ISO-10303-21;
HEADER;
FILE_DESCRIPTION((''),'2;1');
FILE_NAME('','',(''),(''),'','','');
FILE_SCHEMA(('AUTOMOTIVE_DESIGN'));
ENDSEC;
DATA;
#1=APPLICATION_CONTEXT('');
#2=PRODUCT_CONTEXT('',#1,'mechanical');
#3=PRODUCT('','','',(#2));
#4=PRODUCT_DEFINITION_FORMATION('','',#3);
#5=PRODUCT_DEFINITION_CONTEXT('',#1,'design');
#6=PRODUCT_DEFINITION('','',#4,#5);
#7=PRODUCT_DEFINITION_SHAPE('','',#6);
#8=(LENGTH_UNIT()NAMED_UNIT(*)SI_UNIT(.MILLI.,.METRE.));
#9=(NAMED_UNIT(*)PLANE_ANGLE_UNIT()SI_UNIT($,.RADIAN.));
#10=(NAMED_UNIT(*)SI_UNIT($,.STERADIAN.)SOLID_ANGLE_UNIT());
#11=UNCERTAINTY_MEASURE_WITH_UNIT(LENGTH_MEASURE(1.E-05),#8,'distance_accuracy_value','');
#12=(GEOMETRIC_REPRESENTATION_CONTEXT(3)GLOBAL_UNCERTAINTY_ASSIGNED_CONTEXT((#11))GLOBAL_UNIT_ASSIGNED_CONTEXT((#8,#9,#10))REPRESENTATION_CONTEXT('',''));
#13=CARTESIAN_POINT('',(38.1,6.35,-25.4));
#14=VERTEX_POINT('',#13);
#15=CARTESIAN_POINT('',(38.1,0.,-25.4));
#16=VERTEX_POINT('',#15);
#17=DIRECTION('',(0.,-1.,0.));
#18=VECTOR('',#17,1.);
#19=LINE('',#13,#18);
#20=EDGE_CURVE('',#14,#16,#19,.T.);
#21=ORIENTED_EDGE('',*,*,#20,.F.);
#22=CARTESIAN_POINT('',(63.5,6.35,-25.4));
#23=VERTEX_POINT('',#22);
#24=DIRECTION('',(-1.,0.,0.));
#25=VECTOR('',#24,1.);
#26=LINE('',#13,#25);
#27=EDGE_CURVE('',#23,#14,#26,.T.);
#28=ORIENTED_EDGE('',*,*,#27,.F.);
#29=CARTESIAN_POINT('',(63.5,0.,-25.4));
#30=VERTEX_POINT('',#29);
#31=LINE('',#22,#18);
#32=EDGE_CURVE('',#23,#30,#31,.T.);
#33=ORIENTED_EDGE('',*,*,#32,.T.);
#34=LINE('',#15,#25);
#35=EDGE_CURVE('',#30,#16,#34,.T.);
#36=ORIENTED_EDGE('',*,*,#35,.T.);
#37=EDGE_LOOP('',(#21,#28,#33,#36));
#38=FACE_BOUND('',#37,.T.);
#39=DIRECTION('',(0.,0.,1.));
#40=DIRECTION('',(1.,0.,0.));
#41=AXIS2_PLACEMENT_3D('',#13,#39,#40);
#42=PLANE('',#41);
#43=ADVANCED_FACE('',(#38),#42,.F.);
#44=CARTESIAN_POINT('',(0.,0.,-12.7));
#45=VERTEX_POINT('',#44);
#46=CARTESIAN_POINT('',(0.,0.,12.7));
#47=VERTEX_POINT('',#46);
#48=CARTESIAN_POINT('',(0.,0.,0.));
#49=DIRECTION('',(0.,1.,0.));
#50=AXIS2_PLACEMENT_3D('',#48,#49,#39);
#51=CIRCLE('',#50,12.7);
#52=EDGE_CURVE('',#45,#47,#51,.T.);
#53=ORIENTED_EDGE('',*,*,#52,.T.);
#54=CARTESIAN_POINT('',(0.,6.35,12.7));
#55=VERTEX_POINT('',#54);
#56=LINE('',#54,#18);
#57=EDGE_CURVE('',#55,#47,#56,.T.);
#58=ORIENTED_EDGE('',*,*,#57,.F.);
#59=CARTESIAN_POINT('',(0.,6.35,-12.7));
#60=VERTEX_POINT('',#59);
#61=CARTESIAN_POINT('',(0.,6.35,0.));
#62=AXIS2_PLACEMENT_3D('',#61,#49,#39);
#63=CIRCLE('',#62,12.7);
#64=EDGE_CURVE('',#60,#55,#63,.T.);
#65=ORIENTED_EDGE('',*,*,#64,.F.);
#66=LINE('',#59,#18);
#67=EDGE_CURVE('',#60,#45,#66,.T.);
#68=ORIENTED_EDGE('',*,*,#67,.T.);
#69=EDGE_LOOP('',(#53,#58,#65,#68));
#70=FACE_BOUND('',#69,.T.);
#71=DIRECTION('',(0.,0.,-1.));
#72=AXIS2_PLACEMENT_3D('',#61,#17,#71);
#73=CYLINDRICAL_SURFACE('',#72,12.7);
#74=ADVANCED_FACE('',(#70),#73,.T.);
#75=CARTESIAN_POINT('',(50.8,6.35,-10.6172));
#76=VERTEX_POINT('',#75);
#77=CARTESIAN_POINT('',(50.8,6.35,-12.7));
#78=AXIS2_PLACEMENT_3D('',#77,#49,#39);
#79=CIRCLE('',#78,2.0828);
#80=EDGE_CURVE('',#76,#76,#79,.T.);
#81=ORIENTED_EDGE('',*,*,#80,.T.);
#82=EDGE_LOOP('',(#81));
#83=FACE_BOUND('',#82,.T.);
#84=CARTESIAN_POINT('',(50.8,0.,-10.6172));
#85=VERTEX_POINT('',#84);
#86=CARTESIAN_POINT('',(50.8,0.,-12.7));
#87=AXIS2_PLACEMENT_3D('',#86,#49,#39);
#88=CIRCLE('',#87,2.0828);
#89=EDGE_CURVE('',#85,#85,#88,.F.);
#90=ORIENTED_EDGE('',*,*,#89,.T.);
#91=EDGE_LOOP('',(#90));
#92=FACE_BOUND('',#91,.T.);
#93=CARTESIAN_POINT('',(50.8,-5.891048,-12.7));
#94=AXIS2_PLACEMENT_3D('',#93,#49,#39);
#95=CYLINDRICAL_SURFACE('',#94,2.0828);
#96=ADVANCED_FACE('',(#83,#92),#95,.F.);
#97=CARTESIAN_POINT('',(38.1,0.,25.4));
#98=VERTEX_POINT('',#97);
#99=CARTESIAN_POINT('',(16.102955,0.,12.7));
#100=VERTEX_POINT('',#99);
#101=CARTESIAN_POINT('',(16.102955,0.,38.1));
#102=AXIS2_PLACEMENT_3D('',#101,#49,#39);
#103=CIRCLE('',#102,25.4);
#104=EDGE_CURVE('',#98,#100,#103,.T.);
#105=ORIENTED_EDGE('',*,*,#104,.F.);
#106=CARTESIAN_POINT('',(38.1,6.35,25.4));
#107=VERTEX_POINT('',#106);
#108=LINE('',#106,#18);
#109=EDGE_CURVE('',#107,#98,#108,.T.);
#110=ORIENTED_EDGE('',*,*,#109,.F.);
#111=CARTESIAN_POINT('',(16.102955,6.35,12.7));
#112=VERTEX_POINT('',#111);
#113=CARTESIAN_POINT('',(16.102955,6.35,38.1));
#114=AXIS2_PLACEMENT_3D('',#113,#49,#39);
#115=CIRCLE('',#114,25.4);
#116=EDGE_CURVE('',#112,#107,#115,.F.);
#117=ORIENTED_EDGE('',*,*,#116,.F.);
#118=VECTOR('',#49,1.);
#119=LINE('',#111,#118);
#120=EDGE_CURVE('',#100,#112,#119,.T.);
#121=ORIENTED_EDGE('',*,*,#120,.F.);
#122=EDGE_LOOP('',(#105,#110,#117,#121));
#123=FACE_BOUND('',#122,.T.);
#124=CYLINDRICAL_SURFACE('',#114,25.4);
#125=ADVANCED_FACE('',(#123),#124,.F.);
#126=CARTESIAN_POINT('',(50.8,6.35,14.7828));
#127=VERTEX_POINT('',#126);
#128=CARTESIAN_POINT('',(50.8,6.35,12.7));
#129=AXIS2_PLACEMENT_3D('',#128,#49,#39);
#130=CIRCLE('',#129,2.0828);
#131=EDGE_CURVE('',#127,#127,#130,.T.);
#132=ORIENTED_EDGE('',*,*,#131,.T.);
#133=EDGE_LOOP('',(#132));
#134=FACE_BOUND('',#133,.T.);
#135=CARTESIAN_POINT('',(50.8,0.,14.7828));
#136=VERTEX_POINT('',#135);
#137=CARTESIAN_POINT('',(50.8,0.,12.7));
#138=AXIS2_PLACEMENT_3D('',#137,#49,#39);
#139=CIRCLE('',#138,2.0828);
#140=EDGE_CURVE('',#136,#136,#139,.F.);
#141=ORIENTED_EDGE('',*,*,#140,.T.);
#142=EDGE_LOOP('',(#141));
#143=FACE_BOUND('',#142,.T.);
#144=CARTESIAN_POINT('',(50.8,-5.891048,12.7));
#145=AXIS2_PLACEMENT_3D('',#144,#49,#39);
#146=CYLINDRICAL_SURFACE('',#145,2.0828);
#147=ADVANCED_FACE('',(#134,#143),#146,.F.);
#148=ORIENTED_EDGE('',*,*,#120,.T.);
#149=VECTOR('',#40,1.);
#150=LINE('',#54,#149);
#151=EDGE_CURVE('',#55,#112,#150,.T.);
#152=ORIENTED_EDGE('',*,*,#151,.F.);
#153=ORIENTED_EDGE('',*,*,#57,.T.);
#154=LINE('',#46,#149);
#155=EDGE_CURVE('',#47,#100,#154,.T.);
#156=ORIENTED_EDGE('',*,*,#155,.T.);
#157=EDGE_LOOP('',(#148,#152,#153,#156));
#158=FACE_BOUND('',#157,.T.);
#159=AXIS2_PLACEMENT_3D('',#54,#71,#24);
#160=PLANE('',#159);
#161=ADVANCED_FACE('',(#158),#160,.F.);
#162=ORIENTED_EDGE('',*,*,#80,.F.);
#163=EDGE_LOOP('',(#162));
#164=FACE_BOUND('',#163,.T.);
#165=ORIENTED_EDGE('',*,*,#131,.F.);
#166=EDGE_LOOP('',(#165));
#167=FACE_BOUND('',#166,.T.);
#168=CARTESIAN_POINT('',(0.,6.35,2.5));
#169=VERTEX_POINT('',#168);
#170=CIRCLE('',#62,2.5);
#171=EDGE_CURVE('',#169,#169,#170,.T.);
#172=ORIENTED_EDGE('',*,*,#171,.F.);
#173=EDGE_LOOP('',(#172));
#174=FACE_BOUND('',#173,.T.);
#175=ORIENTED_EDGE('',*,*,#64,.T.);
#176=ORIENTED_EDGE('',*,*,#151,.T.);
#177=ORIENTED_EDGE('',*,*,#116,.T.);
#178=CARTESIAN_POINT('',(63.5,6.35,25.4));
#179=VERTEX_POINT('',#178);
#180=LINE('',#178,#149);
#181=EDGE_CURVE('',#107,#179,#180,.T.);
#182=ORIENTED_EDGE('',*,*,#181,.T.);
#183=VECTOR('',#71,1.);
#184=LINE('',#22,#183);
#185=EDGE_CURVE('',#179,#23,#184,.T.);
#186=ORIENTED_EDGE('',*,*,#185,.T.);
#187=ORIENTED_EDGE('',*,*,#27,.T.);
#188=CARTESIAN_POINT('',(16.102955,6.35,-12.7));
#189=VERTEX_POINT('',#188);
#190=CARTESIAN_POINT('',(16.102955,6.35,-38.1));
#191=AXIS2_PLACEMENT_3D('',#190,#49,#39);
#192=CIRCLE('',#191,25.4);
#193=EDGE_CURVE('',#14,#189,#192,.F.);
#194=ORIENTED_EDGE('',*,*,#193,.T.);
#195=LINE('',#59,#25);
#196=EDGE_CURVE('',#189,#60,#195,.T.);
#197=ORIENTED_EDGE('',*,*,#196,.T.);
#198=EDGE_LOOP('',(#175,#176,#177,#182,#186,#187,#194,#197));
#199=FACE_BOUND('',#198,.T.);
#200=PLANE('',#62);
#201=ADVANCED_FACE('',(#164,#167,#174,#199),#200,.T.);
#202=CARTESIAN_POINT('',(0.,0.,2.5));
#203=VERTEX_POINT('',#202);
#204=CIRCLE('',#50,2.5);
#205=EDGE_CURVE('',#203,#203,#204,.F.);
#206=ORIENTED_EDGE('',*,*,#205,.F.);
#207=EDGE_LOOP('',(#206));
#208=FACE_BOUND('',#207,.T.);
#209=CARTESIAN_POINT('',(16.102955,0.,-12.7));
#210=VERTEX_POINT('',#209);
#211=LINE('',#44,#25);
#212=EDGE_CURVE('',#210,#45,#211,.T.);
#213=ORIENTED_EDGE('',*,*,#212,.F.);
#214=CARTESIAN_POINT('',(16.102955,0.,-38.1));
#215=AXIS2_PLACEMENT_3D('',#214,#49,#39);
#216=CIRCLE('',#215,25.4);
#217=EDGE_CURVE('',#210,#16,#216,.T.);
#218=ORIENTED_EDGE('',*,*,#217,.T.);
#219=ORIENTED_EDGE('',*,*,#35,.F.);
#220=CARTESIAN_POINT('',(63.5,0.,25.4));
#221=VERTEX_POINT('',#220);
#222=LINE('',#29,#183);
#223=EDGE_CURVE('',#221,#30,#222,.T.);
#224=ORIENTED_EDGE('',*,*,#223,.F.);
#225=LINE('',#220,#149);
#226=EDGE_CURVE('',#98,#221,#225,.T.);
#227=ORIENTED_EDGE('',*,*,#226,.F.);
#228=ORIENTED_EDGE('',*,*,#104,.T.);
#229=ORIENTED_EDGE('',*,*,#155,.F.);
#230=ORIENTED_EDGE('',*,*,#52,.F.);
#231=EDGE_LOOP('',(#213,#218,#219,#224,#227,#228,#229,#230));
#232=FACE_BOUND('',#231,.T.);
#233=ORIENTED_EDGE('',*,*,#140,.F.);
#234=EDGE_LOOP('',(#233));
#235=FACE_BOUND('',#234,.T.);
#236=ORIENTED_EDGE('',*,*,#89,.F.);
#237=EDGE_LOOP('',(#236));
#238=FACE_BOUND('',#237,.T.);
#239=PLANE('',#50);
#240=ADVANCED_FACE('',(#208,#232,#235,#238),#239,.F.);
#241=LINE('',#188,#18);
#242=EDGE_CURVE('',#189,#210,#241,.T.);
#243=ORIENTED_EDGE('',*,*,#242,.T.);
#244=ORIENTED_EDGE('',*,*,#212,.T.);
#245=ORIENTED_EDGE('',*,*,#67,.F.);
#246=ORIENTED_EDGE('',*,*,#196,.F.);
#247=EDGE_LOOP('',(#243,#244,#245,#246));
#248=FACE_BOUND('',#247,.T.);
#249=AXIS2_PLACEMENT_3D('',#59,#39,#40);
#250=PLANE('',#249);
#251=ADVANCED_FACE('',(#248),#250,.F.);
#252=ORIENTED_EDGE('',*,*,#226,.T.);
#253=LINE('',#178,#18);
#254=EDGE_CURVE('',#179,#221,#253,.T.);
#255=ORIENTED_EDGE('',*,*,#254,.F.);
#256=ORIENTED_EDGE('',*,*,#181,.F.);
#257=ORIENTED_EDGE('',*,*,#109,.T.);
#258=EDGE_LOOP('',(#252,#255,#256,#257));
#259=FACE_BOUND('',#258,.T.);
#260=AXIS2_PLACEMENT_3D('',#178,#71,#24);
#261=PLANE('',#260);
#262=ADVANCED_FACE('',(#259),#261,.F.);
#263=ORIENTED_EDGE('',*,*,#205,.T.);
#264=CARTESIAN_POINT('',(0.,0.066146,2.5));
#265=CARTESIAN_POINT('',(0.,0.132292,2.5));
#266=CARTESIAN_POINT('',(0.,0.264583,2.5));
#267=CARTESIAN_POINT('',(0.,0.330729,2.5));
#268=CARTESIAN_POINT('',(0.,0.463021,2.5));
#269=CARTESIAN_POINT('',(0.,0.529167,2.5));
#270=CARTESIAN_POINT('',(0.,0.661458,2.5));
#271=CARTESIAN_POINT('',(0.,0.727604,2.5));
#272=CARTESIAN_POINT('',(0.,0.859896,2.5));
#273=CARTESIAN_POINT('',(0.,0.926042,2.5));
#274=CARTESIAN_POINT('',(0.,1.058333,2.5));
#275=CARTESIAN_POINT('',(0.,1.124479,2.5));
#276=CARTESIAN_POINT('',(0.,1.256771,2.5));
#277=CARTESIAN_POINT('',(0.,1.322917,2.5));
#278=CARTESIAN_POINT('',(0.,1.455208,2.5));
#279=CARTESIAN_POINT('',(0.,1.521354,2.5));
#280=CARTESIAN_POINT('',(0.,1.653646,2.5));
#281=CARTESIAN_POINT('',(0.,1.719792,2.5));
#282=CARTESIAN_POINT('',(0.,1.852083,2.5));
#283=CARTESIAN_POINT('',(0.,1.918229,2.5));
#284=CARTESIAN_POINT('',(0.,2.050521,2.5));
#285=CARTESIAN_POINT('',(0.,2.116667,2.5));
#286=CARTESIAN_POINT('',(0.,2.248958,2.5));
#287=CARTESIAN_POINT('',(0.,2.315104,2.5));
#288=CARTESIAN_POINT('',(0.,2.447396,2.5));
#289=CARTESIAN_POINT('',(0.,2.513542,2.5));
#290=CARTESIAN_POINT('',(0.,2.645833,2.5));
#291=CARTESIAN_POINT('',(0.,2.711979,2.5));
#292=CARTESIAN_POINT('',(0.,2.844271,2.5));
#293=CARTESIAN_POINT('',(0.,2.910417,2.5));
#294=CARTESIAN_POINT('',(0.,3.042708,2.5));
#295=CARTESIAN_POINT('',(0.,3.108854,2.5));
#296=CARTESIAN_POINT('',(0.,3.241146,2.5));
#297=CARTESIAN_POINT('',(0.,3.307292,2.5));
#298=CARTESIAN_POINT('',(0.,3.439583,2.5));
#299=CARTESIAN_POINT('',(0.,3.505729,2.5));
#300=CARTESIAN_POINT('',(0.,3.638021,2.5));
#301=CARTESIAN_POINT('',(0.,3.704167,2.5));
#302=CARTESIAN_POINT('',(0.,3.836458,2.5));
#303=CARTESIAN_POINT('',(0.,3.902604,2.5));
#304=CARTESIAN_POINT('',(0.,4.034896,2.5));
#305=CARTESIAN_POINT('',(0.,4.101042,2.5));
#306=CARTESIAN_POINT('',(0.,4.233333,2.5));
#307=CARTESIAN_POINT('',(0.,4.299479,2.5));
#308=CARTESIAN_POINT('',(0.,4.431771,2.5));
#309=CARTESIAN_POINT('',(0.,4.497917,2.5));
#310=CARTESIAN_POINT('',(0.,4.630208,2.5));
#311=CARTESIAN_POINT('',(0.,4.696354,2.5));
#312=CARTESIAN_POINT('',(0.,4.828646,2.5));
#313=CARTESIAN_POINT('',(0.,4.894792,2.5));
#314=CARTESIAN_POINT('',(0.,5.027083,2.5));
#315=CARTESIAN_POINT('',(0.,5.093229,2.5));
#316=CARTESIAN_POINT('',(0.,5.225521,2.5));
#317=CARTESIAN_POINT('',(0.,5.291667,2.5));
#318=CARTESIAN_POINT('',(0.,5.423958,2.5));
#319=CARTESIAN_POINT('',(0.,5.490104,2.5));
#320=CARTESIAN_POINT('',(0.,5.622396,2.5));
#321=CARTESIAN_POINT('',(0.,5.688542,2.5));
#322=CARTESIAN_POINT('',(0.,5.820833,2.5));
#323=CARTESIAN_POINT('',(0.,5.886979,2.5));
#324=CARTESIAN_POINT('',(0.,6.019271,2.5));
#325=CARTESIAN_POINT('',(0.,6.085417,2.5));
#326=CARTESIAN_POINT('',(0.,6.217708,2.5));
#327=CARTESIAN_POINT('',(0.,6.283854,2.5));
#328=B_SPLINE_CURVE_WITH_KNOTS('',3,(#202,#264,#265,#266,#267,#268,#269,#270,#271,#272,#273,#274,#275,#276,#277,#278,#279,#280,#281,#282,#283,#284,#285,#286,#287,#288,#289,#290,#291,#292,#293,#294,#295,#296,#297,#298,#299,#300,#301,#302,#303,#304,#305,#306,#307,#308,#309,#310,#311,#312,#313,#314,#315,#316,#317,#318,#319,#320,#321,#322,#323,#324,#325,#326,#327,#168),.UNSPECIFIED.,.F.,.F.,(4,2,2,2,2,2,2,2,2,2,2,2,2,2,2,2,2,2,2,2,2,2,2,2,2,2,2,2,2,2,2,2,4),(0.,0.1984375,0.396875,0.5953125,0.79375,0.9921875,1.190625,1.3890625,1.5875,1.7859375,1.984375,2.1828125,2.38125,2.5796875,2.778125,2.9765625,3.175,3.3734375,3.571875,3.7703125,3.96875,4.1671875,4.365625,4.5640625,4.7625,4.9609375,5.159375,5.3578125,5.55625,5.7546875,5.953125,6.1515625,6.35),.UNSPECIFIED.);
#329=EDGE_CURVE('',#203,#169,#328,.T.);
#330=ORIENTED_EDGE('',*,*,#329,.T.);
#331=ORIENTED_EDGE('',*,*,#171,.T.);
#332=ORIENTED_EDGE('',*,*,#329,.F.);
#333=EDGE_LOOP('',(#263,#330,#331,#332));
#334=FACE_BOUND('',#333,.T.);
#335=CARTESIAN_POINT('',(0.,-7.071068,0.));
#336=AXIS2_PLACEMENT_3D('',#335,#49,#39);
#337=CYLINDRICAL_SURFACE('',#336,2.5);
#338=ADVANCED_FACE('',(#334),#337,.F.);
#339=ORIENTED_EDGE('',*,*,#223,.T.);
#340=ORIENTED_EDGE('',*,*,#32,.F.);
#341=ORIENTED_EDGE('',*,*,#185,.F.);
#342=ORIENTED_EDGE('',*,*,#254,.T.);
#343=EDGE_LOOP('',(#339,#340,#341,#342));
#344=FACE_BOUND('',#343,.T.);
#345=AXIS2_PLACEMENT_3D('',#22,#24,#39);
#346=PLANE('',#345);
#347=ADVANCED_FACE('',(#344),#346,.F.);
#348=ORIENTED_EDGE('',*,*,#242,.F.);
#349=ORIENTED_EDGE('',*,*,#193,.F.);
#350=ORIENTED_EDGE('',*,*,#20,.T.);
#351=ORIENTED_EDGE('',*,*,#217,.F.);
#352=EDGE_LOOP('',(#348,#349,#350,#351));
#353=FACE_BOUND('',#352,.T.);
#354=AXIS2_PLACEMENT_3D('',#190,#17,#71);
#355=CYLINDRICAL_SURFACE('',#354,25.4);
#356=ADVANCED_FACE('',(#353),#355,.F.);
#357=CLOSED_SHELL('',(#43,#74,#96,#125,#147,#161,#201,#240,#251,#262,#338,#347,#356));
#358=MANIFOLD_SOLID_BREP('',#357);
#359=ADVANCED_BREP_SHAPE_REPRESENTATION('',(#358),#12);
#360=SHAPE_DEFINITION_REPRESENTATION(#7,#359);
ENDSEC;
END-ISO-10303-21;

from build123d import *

# Parameters (mm, degrees)
BOSS_EXTRUDE1_DEPTH = 6.35
FILLET1_R           = 25.4
SKETCH2_R           = 2.5
CUT_EXTRUDE1_DEPTH  = 6.35
SKETCH3_R           = 2.0828
CUT_EXTRUDE2_DEPTH  = 6.35


with BuildPart() as part:
    # Sketch1 → Boss-Extrude1 (new body)
    with BuildSketch(Plane(origin=(0, 0, 0), x_dir=(1, 0, 0), z_dir=(0, 1, 0))):
        with BuildLine():
            Line((0, 12.7), (38.1, 12.7))
            Line((38.1, 12.7), (38.1, 25.4))
            Line((38.1, 25.4), (63.5, 25.4))
            Line((63.5, 25.4), (63.5, -25.4))
            Line((63.5, -25.4), (38.1, -25.4))
            Line((38.1, -25.4), (38.1, -12.7))
            Line((38.1, -12.7), (0, -12.7))
            ThreePointArc((0, -12.7), (-12.7, 0), (0, 12.7))
        make_face()
    extrude(amount=BOSS_EXTRUDE1_DEPTH)

    # Fillet1
    # the kernel refuses this fillet: 25.4 mm, written as the material it adds along each edge
    with BuildSketch(Plane(origin=(38.1, 0, 12.7), x_dir=(0, 0, 1), z_dir=(0, 1, 0))) as fillet1_piece_1:
        with BuildLine():
            CenterArc((25.4, -21.997045256), FILLET1_R, 120, 60)
            Line((0, -21.997045256), (-0.508, -21.997045256))
            Line((-0.508, -21.997045256), (-0.508, 0))
            Line((-0.508, 0), (0, 0.508))
            ThreePointArc((0, 0.508), (6.35, 0.508), (12.446, 0.439940905))
            Line((12.446, 0.439940905), (12.7, 0))
        make_face()
    extrude(amount=6.35)
    with BuildSketch(Plane(origin=(38.1, 0, -12.7), x_dir=(-1, 0, 0), z_dir=(0, 1, 0))) as fillet1_piece_2:
        with BuildLine():
            CenterArc((21.997045256, -25.4), FILLET1_R, 90, 60)
            Line((0, -12.7), (-0.439940905, -12.446))
            ThreePointArc((-0.439940905, -12.446), (-0.508, -6.35), (-0.508, 0))
            Line((-0.508, 0), (0, 0.508))
            Line((0, 0.508), (21.997045256, 0.508))
            Line((21.997045256, 0.508), (21.997045256, 0))
        make_face()
    extrude(amount=6.35)

    # Sketch2 → Cut-Extrude1 (cut)
    with BuildSketch(Plane(origin=(0, 6.35, 0), x_dir=(1, 0, 0), z_dir=(0, 1, 0))):
        with Locations(Location((0, 0, 0), (0, 0, 270))):
            Circle(SKETCH2_R)
    extrude(amount=-CUT_EXTRUDE1_DEPTH, mode=Mode.SUBTRACT)

    # Sketch3 → Cut-Extrude2 (cut)
    with BuildSketch(Plane(origin=(0, 6.35, 0), x_dir=(1, 0, 0), z_dir=(0, 1, 0))):
        with Locations(Location((50.8, 12.7, 0), (0, 0, 270))):
            Circle(SKETCH3_R)
        with Locations(Location((50.8, -12.7, 0), (0, 0, 270))):
            Circle(SKETCH3_R)
    extrude(amount=-CUT_EXTRUDE2_DEPTH, mode=Mode.SUBTRACT)


solid = part.part
